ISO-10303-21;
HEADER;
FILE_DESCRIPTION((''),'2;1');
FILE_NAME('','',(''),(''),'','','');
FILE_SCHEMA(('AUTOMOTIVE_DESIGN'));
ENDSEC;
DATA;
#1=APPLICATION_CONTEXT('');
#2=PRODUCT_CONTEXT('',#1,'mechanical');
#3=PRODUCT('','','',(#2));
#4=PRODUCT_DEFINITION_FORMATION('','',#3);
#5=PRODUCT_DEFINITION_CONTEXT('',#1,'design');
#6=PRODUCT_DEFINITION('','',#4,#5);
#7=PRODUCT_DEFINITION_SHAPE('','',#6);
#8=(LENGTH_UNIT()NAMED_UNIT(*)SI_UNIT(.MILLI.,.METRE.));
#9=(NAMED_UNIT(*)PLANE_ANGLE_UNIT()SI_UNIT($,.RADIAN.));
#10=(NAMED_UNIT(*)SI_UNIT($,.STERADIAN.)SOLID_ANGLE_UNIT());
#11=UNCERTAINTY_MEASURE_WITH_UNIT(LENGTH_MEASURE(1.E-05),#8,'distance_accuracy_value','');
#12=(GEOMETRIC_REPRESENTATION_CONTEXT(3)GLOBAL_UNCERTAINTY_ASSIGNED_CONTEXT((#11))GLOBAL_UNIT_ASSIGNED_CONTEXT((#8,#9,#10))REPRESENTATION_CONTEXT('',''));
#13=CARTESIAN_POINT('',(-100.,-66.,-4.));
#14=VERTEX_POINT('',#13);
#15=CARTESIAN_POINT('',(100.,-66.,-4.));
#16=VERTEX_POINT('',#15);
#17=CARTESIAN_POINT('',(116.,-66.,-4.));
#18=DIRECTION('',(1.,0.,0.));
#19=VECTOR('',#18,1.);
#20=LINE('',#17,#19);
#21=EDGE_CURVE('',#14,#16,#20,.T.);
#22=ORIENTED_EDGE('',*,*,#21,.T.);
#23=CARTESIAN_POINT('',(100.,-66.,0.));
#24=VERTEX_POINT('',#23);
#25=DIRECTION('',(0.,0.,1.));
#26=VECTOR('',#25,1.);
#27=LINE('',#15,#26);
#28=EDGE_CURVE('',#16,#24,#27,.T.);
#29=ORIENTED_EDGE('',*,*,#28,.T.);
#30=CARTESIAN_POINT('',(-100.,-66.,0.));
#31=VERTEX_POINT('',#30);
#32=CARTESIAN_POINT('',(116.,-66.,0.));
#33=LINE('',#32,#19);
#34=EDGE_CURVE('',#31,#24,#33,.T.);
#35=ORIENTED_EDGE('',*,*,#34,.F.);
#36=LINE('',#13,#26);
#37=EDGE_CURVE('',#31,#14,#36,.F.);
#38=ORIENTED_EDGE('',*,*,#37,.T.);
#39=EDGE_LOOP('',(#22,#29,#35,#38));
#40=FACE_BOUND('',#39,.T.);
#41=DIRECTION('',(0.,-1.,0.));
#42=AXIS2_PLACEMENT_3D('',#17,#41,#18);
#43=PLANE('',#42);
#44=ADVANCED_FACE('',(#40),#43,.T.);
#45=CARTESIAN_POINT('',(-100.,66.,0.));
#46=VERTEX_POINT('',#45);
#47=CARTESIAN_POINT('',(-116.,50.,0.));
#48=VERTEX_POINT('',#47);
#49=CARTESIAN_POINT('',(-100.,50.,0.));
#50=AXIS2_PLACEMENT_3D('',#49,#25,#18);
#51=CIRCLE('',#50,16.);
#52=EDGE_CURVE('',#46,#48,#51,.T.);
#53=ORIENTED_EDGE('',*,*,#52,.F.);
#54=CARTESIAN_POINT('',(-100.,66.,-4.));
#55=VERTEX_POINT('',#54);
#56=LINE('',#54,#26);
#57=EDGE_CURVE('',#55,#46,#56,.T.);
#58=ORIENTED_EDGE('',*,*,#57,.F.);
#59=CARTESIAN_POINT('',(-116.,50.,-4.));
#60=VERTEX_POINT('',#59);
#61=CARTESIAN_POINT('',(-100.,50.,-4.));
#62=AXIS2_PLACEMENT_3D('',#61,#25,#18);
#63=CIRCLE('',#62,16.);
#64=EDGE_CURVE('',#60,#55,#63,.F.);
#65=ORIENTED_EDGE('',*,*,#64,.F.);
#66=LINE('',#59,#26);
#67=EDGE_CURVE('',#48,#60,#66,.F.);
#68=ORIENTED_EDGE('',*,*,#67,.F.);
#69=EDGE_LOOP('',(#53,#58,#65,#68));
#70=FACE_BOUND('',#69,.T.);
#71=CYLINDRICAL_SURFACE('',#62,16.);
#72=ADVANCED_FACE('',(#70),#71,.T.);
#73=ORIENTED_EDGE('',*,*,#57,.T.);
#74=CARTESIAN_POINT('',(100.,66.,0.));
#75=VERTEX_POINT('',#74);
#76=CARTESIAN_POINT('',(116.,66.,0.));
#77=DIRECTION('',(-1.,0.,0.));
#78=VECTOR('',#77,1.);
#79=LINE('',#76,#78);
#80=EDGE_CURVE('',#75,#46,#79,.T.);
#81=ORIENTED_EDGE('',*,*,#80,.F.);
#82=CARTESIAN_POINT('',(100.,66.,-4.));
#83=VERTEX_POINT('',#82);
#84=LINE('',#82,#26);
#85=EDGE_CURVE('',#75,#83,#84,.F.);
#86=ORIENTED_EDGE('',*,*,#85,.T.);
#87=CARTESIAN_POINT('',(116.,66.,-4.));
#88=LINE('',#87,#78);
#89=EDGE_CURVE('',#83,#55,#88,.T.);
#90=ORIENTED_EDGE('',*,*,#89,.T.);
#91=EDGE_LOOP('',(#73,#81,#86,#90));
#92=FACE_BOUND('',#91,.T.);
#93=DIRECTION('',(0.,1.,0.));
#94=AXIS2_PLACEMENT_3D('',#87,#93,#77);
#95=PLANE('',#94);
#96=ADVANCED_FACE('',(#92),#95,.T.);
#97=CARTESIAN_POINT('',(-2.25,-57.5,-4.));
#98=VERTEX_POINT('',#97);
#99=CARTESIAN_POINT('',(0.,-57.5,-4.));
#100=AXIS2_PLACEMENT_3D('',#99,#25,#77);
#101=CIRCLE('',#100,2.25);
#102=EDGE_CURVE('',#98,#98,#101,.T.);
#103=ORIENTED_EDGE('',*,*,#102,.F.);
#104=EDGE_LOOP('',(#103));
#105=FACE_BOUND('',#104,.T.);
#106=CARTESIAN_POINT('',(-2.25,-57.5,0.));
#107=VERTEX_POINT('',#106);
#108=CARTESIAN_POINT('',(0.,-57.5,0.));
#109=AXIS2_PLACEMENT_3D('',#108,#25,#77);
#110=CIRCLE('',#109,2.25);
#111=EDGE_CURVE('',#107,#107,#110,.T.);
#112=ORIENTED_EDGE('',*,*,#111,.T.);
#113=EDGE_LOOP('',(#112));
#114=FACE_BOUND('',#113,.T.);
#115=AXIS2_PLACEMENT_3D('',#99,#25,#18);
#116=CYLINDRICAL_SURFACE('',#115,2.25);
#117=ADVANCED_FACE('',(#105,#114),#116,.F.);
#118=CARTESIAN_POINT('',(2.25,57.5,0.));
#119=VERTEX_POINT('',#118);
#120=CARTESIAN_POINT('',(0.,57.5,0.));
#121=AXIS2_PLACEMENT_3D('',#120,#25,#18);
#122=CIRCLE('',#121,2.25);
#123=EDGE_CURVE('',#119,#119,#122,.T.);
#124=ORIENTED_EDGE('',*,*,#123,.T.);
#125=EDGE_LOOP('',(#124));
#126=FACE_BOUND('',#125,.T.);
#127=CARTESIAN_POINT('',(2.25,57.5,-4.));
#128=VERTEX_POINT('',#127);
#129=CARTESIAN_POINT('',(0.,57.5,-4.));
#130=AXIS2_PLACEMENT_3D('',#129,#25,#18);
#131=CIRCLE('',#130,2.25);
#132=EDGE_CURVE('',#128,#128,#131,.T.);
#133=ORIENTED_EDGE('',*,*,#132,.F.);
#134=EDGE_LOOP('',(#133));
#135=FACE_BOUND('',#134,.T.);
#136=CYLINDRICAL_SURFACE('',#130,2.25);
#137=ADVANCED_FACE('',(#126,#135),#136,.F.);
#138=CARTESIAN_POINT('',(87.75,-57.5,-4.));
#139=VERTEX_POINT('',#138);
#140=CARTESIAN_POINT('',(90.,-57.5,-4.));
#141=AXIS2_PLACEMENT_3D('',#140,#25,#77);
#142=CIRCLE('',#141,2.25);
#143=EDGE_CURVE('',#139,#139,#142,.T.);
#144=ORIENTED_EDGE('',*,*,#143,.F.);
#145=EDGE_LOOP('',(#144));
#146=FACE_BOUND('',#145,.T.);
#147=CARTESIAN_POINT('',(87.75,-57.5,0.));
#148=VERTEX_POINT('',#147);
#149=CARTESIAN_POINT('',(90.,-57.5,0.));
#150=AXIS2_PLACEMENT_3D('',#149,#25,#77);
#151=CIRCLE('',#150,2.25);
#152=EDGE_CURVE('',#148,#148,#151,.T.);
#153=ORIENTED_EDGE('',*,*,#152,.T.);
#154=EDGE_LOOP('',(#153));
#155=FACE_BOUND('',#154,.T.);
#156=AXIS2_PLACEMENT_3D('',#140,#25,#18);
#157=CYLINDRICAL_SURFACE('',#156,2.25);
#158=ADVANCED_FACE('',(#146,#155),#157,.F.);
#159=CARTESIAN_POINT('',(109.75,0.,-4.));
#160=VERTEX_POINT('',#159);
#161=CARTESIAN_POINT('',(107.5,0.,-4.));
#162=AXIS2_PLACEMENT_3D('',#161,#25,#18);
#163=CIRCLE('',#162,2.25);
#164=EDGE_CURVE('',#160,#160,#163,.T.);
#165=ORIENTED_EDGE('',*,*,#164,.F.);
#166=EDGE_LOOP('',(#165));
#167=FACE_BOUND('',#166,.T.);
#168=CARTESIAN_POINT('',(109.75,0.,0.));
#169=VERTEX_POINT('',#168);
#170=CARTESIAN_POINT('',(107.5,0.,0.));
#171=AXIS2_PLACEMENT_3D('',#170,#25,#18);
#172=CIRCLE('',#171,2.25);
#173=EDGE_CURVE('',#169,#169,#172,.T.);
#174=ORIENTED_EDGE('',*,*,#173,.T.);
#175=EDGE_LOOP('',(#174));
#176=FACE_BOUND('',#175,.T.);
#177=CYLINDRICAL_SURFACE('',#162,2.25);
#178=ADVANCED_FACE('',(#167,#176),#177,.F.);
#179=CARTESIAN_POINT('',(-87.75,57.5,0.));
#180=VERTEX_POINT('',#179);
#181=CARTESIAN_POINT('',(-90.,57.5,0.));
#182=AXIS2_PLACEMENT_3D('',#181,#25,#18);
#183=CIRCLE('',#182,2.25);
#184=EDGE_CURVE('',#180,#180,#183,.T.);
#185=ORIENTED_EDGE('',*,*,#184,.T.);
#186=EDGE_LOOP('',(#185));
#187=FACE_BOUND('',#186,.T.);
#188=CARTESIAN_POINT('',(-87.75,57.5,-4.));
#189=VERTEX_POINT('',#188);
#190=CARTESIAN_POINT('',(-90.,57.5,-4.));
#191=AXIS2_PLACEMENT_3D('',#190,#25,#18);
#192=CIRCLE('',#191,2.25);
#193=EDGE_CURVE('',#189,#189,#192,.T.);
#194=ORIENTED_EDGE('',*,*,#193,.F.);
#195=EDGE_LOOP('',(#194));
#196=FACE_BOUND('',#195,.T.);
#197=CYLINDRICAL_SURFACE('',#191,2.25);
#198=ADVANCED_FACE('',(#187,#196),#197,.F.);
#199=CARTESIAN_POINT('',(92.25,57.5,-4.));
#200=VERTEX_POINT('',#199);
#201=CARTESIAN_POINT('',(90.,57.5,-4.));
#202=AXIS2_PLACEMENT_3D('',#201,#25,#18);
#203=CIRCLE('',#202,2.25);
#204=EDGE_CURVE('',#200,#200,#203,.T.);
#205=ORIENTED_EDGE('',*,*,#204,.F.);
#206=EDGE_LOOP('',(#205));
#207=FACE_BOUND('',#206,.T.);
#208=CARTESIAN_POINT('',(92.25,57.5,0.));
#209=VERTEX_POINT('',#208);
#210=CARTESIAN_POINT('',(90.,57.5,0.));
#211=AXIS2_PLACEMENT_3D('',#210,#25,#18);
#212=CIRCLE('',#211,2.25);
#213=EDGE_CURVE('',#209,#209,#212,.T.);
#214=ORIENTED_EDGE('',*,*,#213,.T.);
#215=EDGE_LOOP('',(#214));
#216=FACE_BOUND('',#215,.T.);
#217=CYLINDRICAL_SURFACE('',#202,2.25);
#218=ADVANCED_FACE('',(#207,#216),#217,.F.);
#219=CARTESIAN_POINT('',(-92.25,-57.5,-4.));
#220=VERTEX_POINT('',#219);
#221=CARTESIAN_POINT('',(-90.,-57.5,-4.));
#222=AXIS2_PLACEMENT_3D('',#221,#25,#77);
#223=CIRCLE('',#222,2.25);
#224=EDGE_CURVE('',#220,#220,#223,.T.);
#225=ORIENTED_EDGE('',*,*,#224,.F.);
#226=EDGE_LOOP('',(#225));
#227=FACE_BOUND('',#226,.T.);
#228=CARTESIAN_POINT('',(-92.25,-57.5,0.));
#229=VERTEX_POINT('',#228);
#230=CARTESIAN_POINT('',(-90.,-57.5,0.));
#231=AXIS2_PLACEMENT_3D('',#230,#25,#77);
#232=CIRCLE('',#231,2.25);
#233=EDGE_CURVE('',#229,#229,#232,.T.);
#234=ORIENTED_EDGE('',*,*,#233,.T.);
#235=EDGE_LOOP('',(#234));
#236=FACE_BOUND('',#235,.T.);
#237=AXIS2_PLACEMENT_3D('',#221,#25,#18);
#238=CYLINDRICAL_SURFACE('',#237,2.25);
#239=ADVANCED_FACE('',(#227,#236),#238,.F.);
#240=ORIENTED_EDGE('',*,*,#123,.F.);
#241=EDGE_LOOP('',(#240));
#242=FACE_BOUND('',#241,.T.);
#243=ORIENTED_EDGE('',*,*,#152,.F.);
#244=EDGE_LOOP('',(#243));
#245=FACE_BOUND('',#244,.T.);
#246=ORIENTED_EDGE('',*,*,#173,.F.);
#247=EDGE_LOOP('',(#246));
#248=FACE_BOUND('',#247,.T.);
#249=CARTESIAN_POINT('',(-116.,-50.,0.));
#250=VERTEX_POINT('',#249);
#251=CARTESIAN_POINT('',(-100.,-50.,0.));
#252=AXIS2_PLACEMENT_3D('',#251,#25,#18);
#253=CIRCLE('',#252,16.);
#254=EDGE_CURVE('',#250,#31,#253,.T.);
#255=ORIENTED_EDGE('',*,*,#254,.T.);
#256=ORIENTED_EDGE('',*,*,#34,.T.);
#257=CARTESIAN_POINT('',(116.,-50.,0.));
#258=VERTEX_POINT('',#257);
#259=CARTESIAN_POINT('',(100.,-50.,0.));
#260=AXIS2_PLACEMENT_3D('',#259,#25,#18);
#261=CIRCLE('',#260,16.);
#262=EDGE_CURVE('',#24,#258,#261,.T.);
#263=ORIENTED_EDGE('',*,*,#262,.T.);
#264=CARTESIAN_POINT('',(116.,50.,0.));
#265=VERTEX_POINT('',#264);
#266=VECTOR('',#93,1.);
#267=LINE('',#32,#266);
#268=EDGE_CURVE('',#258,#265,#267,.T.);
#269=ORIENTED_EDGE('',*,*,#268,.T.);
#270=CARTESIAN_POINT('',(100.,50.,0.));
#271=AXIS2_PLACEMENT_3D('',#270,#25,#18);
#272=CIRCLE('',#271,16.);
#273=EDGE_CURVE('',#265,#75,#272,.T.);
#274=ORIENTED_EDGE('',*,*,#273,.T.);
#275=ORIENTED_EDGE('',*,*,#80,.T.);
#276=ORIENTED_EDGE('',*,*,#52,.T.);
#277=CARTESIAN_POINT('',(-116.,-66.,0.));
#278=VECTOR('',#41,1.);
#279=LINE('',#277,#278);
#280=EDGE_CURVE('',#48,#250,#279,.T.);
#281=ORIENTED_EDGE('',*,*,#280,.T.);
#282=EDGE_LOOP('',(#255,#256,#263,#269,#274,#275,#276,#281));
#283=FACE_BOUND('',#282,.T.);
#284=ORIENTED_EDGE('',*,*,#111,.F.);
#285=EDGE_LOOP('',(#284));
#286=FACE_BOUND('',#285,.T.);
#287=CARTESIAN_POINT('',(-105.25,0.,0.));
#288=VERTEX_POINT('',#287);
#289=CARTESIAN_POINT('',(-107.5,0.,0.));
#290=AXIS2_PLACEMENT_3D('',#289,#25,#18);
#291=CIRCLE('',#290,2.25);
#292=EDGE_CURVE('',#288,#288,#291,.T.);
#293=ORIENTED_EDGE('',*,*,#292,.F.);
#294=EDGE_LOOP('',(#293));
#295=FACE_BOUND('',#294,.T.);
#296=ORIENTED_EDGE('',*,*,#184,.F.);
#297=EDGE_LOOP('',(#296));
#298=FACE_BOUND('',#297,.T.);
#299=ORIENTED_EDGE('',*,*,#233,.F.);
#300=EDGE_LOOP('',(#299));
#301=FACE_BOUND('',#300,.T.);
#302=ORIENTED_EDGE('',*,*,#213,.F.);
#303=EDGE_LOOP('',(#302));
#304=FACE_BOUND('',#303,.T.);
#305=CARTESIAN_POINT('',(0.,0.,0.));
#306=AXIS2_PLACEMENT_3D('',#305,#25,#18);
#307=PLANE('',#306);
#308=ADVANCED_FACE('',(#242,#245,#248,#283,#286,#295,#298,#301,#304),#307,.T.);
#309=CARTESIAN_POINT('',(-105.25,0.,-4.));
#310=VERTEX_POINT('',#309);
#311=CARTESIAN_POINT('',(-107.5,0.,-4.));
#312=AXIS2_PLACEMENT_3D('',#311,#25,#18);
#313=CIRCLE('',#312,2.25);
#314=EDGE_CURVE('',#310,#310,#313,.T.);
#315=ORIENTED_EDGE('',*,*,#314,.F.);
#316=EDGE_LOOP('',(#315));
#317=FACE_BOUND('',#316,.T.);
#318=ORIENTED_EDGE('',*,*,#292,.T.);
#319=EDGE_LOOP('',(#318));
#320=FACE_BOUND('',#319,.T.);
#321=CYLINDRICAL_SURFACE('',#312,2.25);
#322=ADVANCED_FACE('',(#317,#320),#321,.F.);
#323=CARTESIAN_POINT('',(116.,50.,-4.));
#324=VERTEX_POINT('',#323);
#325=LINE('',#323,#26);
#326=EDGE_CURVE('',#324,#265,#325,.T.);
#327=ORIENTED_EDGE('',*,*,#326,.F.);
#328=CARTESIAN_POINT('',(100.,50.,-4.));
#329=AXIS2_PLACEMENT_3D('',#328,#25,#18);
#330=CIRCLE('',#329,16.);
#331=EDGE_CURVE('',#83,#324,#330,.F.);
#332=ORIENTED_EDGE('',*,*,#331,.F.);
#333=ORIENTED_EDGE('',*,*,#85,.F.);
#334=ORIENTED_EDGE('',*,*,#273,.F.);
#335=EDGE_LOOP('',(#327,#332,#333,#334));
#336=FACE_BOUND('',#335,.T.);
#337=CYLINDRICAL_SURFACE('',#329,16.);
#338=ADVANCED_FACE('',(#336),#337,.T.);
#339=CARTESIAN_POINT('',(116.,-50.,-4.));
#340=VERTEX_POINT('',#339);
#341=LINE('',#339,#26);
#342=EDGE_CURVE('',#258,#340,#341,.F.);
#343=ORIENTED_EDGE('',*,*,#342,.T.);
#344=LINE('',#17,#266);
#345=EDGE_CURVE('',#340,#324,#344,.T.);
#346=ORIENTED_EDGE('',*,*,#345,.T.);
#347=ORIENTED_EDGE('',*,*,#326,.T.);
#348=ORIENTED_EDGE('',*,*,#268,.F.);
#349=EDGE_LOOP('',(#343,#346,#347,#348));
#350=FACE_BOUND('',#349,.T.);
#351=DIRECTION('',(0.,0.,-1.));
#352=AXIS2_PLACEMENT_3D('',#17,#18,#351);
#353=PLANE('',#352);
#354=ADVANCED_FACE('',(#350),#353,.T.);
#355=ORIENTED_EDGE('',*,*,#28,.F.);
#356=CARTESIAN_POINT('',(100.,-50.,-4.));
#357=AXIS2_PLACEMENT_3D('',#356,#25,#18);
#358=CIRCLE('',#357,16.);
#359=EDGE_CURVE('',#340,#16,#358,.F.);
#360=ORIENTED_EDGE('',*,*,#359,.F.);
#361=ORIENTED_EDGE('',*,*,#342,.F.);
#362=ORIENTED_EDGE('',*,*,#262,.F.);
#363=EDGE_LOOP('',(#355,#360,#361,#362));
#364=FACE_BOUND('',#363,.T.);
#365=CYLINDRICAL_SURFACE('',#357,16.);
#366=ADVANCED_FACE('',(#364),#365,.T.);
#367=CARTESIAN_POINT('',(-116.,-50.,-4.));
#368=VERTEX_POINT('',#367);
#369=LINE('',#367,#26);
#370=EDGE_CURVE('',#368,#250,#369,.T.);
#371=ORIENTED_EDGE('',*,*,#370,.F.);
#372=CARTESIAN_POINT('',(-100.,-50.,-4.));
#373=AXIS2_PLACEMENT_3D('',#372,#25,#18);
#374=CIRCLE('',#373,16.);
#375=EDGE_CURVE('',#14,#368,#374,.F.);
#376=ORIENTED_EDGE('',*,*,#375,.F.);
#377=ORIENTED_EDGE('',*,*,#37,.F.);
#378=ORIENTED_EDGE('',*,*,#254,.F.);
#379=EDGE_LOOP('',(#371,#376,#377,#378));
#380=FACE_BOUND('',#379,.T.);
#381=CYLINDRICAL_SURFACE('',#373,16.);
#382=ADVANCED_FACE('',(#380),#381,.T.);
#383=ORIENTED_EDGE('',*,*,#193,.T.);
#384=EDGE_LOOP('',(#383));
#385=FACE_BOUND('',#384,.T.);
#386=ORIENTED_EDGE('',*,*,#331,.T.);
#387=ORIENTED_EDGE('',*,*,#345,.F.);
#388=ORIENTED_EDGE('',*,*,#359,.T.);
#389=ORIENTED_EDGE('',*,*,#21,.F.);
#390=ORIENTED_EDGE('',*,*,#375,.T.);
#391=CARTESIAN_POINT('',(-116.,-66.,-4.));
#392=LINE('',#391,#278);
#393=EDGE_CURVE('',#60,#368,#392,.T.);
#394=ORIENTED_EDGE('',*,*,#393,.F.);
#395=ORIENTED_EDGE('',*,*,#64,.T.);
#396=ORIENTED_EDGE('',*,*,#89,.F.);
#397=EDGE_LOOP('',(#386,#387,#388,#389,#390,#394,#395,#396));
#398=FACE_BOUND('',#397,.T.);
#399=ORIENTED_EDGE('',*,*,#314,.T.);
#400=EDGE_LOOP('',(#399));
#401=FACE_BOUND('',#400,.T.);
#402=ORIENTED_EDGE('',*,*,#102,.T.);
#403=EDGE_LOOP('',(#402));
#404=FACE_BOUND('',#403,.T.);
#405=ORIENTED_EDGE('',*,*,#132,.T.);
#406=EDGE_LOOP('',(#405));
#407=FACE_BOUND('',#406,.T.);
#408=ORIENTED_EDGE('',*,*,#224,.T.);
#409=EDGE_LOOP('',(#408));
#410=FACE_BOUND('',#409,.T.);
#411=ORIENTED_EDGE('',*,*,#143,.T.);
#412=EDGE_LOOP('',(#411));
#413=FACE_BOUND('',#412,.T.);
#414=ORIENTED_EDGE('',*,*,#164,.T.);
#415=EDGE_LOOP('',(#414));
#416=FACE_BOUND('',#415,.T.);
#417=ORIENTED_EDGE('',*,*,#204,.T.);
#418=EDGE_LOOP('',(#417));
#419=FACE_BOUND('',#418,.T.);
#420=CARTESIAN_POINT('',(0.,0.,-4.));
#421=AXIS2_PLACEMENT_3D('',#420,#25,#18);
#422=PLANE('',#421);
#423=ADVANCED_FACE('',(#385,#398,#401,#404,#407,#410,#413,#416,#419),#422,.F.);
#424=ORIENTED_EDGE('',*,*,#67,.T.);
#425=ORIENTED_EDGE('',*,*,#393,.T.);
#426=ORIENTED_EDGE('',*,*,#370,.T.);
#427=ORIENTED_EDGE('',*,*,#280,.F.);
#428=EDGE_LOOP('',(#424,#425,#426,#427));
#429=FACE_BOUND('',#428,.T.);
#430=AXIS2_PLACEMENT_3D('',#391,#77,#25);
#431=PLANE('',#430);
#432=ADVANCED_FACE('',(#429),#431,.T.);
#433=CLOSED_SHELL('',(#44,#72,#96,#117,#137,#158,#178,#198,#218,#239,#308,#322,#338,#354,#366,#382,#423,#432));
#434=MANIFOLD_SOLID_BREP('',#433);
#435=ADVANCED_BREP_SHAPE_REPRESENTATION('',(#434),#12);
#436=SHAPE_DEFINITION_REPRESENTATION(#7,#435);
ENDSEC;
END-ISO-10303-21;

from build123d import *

# Parameters (mm, degrees)
SKETCH_1_W             = 232
SKETCH_1_H             = 132
SKETCH_1_R             = 2.25
SM_BASE_FLANGE_1_DEPTH = 4
FILLET_1_R             = 16


# Sheet-metal steps are written as plain solids
with BuildPart() as part:
    # Sketch 1 → Базовая кромка1 (new body)
    with BuildSketch(Plane.XY):
        Rectangle(SKETCH_1_W, SKETCH_1_H)
        with Locations((0, 57.5)):
            Circle(SKETCH_1_R, mode=Mode.SUBTRACT)
        with Locations((-90, 57.5)):
            Circle(SKETCH_1_R, mode=Mode.SUBTRACT)
        with Locations((90, 57.5)):
            Circle(SKETCH_1_R, mode=Mode.SUBTRACT)
        with Locations((-107.5, 0)):
            Circle(SKETCH_1_R, mode=Mode.SUBTRACT)
        with Locations((107.5, 0)):
            Circle(SKETCH_1_R, mode=Mode.SUBTRACT)
        with Locations(Location((90, -57.5, 0), (0, 0, 180))):
            Circle(SKETCH_1_R, mode=Mode.SUBTRACT)
        with Locations(Location((0, -57.5, 0), (0, 0, 180))):
            Circle(SKETCH_1_R, mode=Mode.SUBTRACT)
        with Locations(Location((-90, -57.5, 0), (0, 0, 180))):
            Circle(SKETCH_1_R, mode=Mode.SUBTRACT)
    extrude(amount=-SM_BASE_FLANGE_1_DEPTH)

    # Скругление1
    fillet_1_edges = [part.edges().sort_by_distance(p)[0] for p in [
        (-116, 66, -2),
        (116, 66, -2),
        (116, -66, -2),
        (-116, -66, -2),
    ]]
    fillet(fillet_1_edges, radius=FILLET_1_R)


solid = part.part
